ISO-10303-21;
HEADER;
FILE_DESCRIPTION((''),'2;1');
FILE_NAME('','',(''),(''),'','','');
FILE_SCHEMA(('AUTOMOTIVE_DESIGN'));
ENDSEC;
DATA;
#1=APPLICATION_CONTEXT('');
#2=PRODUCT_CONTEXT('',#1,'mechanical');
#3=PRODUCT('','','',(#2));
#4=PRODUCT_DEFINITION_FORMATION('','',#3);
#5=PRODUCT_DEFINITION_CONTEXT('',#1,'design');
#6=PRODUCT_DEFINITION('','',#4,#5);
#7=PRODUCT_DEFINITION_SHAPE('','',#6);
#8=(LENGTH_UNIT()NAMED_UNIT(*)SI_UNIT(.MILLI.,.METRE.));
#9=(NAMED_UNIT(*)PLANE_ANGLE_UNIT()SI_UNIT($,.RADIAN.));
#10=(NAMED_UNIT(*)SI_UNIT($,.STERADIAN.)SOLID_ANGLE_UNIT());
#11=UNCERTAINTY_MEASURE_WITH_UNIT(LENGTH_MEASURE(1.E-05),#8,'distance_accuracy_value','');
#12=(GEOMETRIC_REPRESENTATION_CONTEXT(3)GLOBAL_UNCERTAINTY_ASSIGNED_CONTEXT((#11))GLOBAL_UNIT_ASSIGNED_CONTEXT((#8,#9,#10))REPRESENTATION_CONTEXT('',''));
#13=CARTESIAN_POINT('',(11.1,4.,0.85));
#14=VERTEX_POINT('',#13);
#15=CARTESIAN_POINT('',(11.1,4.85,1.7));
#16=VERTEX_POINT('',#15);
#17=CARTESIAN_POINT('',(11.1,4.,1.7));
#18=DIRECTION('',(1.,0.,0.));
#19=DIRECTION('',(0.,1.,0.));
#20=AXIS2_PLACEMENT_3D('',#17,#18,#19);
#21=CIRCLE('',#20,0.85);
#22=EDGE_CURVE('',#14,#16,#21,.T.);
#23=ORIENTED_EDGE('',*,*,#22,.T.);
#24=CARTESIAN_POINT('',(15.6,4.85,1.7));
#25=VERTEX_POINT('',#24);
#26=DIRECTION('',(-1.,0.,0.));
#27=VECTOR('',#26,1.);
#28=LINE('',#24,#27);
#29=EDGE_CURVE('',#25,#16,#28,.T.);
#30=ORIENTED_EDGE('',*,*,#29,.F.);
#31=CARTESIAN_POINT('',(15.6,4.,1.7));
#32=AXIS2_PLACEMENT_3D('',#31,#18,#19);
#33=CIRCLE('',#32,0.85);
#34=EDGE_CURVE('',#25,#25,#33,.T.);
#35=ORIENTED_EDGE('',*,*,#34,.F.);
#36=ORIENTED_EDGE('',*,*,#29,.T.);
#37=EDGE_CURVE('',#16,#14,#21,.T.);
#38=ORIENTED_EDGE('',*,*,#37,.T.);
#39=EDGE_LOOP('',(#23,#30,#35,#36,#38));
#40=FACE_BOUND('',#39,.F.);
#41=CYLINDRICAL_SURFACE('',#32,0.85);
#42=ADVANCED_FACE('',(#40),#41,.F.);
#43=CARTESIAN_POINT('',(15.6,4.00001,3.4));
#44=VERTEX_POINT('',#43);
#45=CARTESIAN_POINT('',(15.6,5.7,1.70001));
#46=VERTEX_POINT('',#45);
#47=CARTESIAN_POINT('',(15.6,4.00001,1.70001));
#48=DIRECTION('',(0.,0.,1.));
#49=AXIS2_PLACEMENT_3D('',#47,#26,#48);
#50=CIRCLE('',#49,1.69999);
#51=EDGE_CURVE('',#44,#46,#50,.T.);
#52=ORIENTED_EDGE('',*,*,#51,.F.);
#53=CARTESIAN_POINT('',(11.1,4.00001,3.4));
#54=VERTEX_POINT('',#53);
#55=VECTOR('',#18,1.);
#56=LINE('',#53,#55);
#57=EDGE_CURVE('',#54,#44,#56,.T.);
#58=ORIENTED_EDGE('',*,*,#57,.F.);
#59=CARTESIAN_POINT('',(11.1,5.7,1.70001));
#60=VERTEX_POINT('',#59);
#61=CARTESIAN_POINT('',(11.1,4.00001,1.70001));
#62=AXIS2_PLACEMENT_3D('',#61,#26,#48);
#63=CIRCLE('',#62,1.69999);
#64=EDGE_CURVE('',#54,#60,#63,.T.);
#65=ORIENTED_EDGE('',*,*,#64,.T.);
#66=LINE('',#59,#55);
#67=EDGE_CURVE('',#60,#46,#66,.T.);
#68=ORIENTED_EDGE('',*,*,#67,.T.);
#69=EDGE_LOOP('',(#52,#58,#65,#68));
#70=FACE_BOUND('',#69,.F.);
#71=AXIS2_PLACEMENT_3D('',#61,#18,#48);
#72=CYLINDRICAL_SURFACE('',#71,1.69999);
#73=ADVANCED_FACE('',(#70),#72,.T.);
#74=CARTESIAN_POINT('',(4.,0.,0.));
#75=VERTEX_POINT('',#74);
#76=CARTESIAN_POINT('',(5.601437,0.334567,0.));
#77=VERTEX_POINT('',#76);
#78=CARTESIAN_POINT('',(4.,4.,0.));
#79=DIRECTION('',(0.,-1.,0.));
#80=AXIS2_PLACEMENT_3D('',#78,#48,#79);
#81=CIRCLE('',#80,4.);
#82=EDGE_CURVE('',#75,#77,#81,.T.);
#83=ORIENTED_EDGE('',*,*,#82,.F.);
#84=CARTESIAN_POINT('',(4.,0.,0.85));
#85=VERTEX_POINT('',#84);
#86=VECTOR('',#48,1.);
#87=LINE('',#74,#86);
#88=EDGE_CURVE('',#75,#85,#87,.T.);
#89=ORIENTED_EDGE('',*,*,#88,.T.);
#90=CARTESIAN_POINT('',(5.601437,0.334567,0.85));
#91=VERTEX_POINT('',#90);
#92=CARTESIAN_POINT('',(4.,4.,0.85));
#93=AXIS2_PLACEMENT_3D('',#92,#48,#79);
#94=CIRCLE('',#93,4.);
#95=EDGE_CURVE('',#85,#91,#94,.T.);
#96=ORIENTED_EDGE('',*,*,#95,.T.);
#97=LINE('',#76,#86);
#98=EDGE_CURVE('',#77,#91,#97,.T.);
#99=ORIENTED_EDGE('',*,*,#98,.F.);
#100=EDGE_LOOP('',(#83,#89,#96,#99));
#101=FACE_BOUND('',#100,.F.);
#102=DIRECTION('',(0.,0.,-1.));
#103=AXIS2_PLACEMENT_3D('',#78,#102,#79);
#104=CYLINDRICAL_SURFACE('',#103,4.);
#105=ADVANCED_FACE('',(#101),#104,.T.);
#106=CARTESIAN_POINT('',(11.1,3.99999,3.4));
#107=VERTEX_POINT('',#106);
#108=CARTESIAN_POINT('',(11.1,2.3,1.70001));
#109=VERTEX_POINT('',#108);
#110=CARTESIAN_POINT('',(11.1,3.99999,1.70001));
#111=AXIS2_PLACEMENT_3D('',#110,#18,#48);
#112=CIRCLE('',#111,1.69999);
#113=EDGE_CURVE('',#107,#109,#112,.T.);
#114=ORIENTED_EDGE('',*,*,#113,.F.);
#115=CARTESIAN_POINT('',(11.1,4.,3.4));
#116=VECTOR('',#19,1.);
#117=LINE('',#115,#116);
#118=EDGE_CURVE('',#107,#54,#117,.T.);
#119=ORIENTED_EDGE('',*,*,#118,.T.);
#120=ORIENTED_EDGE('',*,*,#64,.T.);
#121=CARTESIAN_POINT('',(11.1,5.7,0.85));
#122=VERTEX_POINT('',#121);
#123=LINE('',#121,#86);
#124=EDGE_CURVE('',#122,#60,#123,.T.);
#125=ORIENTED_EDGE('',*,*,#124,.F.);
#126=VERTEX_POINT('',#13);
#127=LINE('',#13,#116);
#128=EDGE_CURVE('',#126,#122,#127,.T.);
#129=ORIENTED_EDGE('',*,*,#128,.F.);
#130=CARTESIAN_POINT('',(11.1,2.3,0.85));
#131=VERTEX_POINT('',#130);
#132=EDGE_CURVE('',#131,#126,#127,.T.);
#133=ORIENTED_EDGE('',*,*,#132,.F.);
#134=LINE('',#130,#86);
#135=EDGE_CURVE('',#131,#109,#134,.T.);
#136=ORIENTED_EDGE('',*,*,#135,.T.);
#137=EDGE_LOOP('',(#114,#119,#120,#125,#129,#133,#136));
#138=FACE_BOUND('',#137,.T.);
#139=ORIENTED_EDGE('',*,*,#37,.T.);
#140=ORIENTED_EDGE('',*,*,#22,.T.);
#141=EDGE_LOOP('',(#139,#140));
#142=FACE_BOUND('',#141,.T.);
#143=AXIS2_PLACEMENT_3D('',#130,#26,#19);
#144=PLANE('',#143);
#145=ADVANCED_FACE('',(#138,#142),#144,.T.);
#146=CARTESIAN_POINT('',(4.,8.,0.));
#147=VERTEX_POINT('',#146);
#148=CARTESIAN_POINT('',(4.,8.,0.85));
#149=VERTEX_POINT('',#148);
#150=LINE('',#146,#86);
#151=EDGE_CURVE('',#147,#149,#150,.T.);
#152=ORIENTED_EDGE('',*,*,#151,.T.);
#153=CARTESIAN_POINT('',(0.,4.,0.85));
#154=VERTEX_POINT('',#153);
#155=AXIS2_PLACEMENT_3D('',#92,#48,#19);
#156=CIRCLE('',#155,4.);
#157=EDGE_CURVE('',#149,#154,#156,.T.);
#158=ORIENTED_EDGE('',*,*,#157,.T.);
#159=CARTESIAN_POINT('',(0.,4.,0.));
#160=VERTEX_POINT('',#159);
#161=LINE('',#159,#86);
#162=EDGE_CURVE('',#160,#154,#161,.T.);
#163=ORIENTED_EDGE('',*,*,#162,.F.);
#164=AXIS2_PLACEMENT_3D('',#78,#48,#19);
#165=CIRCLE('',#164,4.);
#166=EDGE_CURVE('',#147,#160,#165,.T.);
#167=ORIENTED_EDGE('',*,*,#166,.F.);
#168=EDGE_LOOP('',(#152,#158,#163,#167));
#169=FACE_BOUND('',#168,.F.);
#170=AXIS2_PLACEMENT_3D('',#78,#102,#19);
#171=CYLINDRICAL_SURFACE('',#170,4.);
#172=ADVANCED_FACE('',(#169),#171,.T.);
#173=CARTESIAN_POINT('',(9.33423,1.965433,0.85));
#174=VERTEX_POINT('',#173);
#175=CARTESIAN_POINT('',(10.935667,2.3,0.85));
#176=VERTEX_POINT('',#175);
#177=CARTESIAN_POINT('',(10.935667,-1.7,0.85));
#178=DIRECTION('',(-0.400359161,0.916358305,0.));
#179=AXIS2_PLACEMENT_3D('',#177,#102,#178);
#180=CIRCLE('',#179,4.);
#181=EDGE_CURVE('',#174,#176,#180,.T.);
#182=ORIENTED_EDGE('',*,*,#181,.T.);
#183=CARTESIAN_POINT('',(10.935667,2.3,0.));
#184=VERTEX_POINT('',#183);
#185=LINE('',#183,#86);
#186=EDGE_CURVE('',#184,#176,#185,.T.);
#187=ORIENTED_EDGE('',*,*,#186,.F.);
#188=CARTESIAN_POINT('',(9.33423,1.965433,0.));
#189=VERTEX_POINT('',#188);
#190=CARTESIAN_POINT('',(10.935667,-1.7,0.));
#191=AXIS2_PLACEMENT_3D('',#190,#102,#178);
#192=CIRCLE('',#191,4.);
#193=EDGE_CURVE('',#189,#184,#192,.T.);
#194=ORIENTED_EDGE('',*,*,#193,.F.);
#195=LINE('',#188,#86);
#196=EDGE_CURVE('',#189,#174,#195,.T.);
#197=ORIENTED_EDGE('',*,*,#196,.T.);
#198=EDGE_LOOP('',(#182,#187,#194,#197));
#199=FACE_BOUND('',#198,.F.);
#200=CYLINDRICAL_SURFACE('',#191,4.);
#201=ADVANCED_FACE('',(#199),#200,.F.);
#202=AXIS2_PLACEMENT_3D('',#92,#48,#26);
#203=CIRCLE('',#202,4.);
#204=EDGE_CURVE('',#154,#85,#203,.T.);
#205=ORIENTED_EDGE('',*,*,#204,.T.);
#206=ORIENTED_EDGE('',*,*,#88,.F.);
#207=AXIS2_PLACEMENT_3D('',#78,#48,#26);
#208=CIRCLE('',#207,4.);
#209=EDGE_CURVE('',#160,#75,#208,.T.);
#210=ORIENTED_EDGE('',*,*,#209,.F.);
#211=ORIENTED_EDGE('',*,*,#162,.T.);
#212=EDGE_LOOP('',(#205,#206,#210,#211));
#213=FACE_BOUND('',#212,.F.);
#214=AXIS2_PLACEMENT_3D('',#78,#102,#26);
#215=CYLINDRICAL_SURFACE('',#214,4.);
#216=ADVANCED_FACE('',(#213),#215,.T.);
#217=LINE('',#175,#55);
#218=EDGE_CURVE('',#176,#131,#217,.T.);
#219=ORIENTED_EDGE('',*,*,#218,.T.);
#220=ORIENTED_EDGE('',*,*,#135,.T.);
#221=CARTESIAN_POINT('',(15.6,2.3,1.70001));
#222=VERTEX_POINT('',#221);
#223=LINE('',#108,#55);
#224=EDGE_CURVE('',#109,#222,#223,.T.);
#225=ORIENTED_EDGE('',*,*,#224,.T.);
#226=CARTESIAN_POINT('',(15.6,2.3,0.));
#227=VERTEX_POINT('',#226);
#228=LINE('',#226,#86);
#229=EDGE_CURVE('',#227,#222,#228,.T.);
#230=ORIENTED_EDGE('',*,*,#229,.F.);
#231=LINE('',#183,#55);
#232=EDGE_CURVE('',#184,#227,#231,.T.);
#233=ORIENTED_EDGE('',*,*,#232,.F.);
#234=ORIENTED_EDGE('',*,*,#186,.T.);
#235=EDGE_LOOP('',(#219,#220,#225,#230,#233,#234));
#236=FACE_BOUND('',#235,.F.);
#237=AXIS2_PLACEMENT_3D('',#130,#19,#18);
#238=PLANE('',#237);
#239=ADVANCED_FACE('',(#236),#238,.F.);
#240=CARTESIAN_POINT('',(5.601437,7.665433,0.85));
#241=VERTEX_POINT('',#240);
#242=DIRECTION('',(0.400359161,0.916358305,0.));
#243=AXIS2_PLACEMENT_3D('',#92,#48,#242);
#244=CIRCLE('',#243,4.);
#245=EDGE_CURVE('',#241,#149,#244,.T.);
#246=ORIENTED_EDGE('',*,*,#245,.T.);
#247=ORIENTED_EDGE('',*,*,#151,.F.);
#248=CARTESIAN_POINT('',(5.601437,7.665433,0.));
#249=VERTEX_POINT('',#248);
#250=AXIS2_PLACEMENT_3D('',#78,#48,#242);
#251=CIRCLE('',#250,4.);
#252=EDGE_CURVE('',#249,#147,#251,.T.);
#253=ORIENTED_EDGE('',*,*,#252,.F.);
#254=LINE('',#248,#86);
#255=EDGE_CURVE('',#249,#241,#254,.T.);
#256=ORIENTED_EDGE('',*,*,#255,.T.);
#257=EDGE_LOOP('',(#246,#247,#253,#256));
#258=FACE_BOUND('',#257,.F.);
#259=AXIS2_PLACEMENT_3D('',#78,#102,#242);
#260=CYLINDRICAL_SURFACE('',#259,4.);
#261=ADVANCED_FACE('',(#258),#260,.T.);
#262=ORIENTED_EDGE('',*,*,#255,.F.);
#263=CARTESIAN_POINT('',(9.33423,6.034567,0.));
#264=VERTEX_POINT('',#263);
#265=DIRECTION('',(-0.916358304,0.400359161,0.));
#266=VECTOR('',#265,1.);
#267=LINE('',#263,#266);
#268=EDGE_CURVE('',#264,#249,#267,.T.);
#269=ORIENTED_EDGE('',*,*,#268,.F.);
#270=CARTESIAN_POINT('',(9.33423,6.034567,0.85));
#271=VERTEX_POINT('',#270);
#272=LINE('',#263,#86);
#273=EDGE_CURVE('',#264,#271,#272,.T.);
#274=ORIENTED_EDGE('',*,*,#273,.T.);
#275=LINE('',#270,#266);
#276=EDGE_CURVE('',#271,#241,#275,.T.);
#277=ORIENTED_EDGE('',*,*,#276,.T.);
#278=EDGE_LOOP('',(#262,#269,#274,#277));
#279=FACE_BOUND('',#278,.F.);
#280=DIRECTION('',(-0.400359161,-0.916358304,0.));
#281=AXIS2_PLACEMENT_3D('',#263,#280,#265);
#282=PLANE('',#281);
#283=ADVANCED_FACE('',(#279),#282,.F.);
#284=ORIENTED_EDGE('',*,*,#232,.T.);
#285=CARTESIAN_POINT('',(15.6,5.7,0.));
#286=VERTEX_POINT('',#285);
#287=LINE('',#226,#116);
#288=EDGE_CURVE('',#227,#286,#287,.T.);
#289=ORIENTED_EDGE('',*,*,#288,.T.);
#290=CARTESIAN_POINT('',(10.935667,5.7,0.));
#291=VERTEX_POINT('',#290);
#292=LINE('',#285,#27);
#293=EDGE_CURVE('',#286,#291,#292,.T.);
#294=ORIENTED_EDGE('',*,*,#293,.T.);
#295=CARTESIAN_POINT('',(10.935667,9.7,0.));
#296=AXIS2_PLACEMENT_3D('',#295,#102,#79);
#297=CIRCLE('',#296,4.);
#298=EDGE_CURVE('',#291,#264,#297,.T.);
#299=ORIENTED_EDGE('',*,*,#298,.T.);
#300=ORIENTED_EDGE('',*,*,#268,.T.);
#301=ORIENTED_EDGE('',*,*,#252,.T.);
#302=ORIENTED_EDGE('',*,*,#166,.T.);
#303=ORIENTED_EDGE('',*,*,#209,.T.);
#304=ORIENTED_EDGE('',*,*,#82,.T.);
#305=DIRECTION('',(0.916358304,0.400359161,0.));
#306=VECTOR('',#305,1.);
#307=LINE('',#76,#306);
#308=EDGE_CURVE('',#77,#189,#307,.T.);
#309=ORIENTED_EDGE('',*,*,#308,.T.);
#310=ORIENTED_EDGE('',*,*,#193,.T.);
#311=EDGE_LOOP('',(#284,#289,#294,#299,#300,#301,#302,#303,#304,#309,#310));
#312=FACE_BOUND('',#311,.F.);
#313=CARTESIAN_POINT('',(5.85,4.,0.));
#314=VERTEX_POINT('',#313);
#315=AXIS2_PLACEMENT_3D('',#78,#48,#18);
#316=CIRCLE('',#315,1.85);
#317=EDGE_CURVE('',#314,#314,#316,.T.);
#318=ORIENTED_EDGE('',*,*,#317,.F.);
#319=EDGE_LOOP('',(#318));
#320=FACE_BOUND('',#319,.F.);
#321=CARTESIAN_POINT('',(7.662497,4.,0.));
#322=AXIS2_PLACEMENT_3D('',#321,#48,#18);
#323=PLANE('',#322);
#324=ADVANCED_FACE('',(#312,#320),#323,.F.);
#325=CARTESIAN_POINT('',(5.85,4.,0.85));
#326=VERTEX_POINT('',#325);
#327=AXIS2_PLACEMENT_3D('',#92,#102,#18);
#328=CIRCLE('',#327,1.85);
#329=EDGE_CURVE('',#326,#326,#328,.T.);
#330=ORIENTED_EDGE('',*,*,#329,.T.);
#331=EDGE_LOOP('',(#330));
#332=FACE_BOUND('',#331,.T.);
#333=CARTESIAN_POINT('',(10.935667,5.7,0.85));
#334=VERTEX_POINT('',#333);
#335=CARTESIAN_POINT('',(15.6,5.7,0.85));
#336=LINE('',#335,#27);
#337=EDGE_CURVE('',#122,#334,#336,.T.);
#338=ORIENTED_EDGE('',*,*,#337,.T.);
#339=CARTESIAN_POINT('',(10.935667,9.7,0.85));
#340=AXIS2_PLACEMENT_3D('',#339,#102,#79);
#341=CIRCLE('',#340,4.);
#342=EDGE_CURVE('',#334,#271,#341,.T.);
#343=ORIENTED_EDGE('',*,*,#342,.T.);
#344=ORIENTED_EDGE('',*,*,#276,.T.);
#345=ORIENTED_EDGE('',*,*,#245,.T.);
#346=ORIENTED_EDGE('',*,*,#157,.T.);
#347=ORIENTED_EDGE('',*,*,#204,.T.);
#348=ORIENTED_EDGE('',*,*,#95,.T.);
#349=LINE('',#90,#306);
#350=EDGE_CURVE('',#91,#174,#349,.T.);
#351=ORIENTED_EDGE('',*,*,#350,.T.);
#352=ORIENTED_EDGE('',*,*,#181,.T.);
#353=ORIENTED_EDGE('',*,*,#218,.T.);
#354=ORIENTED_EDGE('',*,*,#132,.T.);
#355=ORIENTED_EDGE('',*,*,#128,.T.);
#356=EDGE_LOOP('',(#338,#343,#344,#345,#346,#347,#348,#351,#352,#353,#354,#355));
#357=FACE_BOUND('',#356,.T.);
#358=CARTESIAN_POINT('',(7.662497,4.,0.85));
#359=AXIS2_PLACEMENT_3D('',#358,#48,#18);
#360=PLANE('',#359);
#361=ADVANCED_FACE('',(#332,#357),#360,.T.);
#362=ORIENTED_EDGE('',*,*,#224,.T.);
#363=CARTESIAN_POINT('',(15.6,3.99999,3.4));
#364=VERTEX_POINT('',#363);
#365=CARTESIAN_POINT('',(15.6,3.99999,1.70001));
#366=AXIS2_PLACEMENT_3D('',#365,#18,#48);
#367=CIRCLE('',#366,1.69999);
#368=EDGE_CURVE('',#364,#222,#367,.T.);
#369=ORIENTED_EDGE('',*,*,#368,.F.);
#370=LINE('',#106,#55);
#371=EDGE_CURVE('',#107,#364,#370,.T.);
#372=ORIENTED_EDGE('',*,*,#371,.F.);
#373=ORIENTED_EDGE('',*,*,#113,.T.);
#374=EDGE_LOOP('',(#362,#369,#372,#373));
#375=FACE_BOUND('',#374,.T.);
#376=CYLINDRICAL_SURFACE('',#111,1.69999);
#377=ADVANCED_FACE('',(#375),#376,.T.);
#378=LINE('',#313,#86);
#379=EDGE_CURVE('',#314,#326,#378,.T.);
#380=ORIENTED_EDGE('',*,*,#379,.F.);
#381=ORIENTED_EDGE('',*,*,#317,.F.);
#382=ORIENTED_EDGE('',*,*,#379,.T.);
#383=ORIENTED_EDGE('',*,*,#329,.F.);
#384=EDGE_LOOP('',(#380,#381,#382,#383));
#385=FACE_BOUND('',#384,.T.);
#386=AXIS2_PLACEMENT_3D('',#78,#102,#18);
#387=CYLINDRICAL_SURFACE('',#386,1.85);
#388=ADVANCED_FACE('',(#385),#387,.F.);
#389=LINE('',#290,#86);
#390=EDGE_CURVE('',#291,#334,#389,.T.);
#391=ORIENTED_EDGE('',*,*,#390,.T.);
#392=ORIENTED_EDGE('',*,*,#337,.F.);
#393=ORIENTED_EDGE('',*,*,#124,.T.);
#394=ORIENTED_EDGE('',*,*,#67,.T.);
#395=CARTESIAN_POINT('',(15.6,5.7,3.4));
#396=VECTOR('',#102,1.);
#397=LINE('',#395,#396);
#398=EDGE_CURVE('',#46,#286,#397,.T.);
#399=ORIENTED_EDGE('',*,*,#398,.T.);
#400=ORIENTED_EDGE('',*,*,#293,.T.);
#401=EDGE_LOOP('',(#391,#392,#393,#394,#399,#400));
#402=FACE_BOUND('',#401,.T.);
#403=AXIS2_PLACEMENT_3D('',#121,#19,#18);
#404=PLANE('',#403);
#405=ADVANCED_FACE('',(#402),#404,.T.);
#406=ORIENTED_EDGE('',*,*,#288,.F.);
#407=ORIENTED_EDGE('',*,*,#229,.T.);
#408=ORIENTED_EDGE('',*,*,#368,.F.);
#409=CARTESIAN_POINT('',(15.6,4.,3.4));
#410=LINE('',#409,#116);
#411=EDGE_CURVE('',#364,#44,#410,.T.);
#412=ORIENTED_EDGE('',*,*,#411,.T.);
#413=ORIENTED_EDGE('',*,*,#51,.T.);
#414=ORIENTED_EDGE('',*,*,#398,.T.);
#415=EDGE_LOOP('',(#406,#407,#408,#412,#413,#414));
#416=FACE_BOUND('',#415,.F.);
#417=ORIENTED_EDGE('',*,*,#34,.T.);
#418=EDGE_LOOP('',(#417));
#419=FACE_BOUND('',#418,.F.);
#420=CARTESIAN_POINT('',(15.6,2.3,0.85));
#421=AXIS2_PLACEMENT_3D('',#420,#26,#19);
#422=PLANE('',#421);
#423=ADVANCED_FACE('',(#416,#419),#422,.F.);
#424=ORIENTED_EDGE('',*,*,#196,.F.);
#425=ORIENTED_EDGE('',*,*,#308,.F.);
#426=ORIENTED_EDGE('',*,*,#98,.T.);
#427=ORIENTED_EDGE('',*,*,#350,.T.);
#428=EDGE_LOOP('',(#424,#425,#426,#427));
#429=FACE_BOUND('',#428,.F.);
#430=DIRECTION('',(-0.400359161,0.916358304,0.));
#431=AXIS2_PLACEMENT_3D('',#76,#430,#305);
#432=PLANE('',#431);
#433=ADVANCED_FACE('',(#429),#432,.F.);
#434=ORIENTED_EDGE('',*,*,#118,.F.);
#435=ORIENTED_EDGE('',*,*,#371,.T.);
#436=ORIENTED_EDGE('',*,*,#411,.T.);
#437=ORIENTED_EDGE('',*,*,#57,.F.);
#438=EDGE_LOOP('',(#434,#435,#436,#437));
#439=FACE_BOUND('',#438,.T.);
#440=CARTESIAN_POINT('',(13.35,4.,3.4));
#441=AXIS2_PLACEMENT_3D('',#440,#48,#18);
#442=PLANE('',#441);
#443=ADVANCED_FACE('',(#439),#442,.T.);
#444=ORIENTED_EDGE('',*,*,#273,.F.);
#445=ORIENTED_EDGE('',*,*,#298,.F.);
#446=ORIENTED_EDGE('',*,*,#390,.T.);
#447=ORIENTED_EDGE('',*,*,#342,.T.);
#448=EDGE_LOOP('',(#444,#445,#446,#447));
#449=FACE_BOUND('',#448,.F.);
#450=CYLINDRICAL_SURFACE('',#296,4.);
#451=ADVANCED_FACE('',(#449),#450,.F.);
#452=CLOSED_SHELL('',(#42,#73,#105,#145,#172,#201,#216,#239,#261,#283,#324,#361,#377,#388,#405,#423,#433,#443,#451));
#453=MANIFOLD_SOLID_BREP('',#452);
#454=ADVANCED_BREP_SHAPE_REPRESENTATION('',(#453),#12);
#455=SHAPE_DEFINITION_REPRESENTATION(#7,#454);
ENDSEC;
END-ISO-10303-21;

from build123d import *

# Parameters (mm, degrees)
F0_R     = 1.85
F1_DEPTH = 0.85
F2_W     = 4.5
F2_H     = 3.4
F3_DEPTH = 2.55
F4_R     = 1.69999
F5_R     = 0.85
F6_DEPTH = 25


# Not quite as in the source:
# - a fillet or chamfer is up to 0.001 mm smaller than in the source, because OpenCascade refuses the exact size


with BuildPart() as f1:
    # F0 (on Top) → F1 (new body)
    with BuildSketch(Plane.XY):
        with BuildLine():
            Line((10.9356666081, 2.3), (15.6, 2.3))
            Line((15.6, 2.3), (15.6, 5.7))
            Line((15.6, 5.7), (10.9356666081, 5.7))
            ThreePointArc((10.9356666081, 5.7), (10.117660762, 5.7845349656), (9.3342299639, 6.0345667821))
            Line((9.3342299639, 6.0345667821), (5.6014366442, 7.6654332179))
            ThreePointArc((5.6014366442, 7.6654332179), (4.8180058461, 7.9154650344), (4, 8))
            ThreePointArc((4, 8), (1.1715728753, 6.8284271247), (0, 4))
            ThreePointArc((0, 4), (1.1715728753, 1.1715728753), (4, 0))
            ThreePointArc((4, 0), (4.8180058461, 0.0845349656), (5.6014366442, 0.3345667821))
            Line((5.6014366442, 0.3345667821), (9.3342299639, 1.9654332179))
            ThreePointArc((9.3342299639, 1.9654332179), (10.117660762, 2.2154650344), (10.9356666081, 2.3))
        make_face()
        with Locations((4, 4)):
            Circle(F0_R, mode=Mode.SUBTRACT)
    extrude(amount=F1_DEPTH)

    # F2 (on face) → F3 (join)
    with BuildSketch(Plane.XY.offset(0.85)):
        with Locations((13.35, 4)):
            Rectangle(F2_W, F2_H)
    extrude(amount=F3_DEPTH)

    # F4 (radius 1.7 in the source; OpenCascade refuses exactly that, so slightly less here)
    f4_edges = [f1.edges().sort_by_distance(p)[0] for p in [
        (13.35, 5.7, 3.4),
        (13.35, 2.3, 3.4),
    ]]
    fillet(f4_edges, radius=F4_R)

    # F5 (on face) → F6 (cut)
    with BuildSketch(Plane.YZ.offset(15.6)):
        with Locations((4, 1.7)):
            Circle(F5_R)
    extrude(amount=-F6_DEPTH, mode=Mode.SUBTRACT)


solid = f1.part
